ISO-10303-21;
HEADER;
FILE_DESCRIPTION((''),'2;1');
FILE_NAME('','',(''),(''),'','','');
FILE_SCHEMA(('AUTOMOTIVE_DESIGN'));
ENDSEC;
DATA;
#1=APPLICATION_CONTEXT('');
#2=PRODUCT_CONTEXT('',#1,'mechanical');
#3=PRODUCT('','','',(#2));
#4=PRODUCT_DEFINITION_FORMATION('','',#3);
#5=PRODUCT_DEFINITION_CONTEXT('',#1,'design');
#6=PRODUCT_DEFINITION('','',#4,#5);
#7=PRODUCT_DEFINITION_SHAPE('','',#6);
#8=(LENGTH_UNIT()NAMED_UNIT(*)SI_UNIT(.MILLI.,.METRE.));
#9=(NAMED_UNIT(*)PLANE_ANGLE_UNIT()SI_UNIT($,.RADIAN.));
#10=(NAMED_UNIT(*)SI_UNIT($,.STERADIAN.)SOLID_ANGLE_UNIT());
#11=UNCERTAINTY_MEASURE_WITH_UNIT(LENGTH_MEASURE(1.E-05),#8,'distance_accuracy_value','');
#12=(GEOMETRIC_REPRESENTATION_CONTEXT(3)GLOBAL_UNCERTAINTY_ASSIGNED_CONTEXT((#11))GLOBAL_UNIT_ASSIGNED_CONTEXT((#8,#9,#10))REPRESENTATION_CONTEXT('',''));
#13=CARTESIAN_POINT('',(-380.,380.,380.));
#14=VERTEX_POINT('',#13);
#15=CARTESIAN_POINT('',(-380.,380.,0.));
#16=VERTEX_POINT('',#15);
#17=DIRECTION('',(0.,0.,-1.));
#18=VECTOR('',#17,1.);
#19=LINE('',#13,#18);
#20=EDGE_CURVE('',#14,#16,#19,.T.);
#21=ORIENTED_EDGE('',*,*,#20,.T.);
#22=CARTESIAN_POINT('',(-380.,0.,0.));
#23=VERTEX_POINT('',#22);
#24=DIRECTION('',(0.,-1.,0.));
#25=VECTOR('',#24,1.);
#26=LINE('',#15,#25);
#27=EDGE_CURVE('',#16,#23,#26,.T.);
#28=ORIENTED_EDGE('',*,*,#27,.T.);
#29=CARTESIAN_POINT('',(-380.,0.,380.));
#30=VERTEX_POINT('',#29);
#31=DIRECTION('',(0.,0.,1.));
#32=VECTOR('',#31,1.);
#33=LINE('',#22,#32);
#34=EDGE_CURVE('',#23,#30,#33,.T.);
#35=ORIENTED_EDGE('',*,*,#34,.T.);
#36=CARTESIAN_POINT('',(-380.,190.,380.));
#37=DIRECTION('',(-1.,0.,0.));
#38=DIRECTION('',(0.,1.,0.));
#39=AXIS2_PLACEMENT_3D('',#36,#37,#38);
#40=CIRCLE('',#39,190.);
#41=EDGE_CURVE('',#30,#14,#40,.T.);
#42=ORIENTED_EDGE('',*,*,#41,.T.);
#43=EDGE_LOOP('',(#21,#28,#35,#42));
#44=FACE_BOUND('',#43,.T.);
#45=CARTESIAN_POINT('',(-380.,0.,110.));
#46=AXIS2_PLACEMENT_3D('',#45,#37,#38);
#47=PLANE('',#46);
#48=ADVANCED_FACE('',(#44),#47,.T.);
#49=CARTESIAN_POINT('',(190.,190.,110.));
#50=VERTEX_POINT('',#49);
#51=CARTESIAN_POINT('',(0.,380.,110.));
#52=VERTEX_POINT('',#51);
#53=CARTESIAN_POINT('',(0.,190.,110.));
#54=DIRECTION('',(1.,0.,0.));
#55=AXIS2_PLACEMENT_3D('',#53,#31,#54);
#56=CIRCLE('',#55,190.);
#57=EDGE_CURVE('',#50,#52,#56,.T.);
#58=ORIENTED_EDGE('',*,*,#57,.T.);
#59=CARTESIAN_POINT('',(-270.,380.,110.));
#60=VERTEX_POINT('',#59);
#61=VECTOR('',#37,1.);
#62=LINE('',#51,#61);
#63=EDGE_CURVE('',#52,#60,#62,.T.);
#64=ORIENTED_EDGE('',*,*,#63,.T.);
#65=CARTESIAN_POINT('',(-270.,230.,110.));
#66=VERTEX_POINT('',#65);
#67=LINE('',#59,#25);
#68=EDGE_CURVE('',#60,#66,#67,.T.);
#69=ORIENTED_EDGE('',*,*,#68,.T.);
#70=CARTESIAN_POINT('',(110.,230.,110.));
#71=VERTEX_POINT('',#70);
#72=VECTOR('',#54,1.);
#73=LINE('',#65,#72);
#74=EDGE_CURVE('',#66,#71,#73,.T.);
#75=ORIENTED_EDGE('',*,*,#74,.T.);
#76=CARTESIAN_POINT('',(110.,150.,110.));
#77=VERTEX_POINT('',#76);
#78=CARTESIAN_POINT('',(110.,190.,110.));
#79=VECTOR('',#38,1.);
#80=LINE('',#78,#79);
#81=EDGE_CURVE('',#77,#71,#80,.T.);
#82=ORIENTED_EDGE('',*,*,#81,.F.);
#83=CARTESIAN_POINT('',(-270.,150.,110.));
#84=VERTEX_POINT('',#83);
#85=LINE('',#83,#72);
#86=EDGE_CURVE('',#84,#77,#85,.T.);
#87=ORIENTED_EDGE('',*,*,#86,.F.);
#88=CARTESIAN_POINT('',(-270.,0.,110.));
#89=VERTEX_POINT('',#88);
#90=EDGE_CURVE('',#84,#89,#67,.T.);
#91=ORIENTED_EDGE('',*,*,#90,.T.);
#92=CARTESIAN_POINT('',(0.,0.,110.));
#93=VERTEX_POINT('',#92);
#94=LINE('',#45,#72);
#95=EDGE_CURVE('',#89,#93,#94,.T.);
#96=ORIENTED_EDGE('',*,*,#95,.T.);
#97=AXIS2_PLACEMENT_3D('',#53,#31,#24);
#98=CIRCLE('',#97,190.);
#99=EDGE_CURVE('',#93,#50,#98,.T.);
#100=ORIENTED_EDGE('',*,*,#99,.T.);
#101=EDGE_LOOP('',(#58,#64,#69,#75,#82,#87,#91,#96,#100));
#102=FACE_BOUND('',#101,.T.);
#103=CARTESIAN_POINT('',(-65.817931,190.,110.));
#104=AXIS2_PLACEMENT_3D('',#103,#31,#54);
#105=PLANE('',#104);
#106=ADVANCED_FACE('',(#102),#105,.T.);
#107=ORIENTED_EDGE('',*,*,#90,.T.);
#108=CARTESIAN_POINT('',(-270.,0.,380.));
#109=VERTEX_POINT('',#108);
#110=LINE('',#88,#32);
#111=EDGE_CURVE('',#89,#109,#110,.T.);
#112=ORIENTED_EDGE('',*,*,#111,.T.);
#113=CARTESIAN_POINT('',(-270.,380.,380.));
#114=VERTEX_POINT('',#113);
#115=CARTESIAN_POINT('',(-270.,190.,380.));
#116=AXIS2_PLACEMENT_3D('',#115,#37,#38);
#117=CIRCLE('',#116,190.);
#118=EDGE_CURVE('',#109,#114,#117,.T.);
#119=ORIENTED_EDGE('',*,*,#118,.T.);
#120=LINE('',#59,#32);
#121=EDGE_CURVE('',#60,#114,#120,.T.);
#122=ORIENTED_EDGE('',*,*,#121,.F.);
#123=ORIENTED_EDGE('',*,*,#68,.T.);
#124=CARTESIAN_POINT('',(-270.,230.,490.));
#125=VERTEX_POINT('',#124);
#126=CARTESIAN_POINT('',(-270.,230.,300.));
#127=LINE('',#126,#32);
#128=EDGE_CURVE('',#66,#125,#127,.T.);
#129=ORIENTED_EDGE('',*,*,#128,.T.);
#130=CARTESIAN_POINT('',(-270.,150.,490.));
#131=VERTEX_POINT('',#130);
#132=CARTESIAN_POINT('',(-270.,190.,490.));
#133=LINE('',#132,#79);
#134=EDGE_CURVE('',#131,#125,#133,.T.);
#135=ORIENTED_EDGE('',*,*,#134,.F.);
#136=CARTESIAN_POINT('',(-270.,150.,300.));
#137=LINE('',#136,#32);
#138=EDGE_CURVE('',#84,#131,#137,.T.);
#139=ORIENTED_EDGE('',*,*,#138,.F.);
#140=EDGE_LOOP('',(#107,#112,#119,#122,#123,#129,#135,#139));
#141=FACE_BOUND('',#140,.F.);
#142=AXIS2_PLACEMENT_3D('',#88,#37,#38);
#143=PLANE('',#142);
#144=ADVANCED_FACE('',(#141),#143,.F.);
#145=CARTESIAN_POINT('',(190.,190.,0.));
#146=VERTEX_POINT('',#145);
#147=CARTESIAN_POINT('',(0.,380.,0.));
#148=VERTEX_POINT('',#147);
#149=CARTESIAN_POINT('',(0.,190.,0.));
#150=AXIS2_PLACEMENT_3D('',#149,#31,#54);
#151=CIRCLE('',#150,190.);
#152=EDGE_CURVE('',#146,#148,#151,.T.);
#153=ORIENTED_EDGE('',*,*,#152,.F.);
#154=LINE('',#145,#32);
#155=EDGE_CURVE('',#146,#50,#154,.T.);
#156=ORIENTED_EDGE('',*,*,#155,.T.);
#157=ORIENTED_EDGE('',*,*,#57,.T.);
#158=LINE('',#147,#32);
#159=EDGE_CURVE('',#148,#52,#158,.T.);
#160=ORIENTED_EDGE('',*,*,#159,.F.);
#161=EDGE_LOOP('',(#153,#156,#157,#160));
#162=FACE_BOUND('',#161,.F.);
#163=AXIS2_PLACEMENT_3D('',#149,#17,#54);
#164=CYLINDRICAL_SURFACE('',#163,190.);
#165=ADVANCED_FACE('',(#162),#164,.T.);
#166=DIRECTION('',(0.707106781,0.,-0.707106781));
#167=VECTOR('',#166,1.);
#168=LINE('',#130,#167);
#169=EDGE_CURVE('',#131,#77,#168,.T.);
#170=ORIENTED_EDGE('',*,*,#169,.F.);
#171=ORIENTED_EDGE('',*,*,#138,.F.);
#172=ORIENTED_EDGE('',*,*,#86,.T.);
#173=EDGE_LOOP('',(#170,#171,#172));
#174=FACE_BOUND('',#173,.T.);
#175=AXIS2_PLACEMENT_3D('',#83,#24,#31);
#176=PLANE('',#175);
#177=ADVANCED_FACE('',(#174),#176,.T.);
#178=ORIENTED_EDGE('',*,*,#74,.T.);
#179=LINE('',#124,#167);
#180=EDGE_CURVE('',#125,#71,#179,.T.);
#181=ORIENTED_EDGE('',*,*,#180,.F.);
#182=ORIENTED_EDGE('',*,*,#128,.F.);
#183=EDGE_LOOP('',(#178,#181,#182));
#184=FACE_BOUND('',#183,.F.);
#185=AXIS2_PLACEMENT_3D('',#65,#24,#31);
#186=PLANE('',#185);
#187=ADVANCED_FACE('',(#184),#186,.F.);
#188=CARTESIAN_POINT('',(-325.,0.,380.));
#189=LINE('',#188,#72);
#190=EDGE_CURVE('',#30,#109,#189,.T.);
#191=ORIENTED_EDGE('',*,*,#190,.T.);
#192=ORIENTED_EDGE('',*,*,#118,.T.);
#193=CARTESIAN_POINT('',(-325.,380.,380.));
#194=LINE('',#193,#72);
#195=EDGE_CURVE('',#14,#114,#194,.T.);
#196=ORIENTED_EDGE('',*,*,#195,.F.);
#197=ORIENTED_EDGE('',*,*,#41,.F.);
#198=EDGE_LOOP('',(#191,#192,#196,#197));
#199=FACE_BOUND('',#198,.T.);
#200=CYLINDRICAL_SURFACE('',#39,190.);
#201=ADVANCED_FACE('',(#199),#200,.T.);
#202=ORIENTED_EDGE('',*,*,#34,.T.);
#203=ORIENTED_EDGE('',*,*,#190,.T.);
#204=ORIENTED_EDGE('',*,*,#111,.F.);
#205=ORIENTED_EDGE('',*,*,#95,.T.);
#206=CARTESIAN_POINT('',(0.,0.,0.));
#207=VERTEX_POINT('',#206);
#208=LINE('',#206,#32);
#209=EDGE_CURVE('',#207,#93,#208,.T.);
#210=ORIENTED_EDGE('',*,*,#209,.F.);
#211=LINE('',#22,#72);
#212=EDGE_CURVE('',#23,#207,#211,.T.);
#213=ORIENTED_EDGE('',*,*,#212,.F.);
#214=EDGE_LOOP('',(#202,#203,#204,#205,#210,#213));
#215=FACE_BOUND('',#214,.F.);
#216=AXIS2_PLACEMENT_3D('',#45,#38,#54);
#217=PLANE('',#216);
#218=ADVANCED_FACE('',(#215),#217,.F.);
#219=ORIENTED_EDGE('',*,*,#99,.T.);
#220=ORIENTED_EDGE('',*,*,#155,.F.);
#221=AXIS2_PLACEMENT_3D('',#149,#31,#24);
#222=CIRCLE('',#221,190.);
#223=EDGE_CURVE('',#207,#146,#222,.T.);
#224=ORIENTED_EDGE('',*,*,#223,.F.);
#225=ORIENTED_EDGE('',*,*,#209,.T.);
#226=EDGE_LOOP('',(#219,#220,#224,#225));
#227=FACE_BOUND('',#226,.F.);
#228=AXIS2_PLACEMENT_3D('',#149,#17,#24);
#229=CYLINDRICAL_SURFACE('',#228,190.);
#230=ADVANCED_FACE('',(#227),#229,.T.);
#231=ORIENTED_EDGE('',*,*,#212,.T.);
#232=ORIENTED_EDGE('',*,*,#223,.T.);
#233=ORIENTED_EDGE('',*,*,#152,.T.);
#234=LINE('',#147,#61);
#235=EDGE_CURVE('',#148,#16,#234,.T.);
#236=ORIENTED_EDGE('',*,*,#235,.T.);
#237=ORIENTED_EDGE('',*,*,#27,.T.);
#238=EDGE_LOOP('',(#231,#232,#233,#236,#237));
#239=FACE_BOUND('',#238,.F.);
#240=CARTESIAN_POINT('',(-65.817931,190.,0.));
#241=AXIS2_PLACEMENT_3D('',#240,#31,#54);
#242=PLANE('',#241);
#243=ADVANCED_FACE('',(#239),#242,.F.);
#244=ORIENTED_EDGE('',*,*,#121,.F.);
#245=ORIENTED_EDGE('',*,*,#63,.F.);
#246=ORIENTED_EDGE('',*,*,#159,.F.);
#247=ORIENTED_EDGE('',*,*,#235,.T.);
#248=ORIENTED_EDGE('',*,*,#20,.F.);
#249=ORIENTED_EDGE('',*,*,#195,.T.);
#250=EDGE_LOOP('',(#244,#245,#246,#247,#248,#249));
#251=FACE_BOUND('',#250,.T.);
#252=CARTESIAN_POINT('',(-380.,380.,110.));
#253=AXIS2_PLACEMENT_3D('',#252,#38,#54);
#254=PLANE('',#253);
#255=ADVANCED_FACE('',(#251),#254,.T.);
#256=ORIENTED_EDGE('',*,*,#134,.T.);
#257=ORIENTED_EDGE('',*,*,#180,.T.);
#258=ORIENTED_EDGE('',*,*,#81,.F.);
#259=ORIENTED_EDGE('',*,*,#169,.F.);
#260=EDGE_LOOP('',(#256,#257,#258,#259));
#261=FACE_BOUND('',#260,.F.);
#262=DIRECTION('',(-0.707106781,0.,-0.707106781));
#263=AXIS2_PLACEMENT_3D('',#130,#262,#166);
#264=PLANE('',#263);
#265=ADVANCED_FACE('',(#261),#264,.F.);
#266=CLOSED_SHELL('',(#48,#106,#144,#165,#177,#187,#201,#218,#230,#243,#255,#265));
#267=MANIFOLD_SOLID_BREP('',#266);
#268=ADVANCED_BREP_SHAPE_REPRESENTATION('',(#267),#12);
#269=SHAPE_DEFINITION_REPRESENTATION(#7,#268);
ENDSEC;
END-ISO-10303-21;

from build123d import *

# Parameters (mm, degrees)
F1_DEPTH  = 110
F2_W      = 110
F2_H      = 380
F3_DEPTH  = 270
F5_DEPTH  = 150
F7_DEPTH  = 150
F9_DEPTH  = 110
F10_W     = 80
F10_H     = 380
F11_DEPTH = 380
F13_DEPTH = 80


with BuildPart() as f1:
    # F0 (on Top) → F1 (new body)
    with BuildSketch(Plane.XY):
        with BuildLine():
            ThreePointArc((0, 380), (-190, 190), (0, 0))
            Line((0, 0), (0, 380))
        make_face()
        with BuildLine():
            Line((-380, 0), (0, 0))
            ThreePointArc((0, 0), (-190, 190), (0, 380))
            Line((0, 380), (-380, 380))
            Line((-380, 380), (-380, 0))
        make_face()
        with BuildLine():
            Line((0, 380), (0, 0))
            ThreePointArc((0, 0), (134.3502884254, 55.6497115746), (190, 190))
            ThreePointArc((190, 190), (134.3502884254, 324.3502884254), (0, 380))
        make_face()
    extrude(amount=F1_DEPTH)

    # F2 (on face) → F3 (join)
    with BuildSketch(Plane.XY.offset(110)):
        with Locations((-325, 190)):
            Rectangle(F2_W, F2_H)
    extrude(amount=F3_DEPTH)

    # F4 (on face) → F5 (cut)
    with BuildSketch(Plane.XZ):
        Polygon((0, 110), (-270, 380), (-270, 110), align=None)
    extrude(amount=-F5_DEPTH, mode=Mode.SUBTRACT)

    # F6 (on face) → F7 (cut)
    with BuildSketch(Plane(origin=(0, 380, 0), x_dir=(-1, 0, 0), z_dir=(0, 1, 0))):
        Polygon((270, 110), (270, 380), (0, 110), align=None)
    extrude(amount=-F7_DEPTH, mode=Mode.SUBTRACT)

    # F8 (on face) → F9 (join)
    with BuildSketch(Plane(origin=(-380, 0, 0), x_dir=(0, -1, 0), z_dir=(-1, 0, 0))):
        with BuildLine():
            Line((-380, 380), (0, 380))
            ThreePointArc((0, 380), (-190, 570), (-380, 380))
        make_face()
        with BuildLine():
            ThreePointArc((-380, 380), (-190, 190), (0, 380))
            Line((0, 380), (-380, 380))
        make_face()
    extrude(amount=-F9_DEPTH)

    # F10 (on face) → F11 (join)
    with BuildSketch(Plane.YZ.offset(-270)):
        with Locations((190, 300)):
            Rectangle(F10_W, F10_H)
    extrude(amount=F11_DEPTH)

    # F12 (on face) → F13 (cut)
    with BuildSketch(Plane.XZ.offset(-150)):
        Polygon((110, 490), (-270, 490), (110, 110), align=None)
    extrude(amount=-F13_DEPTH, mode=Mode.SUBTRACT)


solid = f1.part
